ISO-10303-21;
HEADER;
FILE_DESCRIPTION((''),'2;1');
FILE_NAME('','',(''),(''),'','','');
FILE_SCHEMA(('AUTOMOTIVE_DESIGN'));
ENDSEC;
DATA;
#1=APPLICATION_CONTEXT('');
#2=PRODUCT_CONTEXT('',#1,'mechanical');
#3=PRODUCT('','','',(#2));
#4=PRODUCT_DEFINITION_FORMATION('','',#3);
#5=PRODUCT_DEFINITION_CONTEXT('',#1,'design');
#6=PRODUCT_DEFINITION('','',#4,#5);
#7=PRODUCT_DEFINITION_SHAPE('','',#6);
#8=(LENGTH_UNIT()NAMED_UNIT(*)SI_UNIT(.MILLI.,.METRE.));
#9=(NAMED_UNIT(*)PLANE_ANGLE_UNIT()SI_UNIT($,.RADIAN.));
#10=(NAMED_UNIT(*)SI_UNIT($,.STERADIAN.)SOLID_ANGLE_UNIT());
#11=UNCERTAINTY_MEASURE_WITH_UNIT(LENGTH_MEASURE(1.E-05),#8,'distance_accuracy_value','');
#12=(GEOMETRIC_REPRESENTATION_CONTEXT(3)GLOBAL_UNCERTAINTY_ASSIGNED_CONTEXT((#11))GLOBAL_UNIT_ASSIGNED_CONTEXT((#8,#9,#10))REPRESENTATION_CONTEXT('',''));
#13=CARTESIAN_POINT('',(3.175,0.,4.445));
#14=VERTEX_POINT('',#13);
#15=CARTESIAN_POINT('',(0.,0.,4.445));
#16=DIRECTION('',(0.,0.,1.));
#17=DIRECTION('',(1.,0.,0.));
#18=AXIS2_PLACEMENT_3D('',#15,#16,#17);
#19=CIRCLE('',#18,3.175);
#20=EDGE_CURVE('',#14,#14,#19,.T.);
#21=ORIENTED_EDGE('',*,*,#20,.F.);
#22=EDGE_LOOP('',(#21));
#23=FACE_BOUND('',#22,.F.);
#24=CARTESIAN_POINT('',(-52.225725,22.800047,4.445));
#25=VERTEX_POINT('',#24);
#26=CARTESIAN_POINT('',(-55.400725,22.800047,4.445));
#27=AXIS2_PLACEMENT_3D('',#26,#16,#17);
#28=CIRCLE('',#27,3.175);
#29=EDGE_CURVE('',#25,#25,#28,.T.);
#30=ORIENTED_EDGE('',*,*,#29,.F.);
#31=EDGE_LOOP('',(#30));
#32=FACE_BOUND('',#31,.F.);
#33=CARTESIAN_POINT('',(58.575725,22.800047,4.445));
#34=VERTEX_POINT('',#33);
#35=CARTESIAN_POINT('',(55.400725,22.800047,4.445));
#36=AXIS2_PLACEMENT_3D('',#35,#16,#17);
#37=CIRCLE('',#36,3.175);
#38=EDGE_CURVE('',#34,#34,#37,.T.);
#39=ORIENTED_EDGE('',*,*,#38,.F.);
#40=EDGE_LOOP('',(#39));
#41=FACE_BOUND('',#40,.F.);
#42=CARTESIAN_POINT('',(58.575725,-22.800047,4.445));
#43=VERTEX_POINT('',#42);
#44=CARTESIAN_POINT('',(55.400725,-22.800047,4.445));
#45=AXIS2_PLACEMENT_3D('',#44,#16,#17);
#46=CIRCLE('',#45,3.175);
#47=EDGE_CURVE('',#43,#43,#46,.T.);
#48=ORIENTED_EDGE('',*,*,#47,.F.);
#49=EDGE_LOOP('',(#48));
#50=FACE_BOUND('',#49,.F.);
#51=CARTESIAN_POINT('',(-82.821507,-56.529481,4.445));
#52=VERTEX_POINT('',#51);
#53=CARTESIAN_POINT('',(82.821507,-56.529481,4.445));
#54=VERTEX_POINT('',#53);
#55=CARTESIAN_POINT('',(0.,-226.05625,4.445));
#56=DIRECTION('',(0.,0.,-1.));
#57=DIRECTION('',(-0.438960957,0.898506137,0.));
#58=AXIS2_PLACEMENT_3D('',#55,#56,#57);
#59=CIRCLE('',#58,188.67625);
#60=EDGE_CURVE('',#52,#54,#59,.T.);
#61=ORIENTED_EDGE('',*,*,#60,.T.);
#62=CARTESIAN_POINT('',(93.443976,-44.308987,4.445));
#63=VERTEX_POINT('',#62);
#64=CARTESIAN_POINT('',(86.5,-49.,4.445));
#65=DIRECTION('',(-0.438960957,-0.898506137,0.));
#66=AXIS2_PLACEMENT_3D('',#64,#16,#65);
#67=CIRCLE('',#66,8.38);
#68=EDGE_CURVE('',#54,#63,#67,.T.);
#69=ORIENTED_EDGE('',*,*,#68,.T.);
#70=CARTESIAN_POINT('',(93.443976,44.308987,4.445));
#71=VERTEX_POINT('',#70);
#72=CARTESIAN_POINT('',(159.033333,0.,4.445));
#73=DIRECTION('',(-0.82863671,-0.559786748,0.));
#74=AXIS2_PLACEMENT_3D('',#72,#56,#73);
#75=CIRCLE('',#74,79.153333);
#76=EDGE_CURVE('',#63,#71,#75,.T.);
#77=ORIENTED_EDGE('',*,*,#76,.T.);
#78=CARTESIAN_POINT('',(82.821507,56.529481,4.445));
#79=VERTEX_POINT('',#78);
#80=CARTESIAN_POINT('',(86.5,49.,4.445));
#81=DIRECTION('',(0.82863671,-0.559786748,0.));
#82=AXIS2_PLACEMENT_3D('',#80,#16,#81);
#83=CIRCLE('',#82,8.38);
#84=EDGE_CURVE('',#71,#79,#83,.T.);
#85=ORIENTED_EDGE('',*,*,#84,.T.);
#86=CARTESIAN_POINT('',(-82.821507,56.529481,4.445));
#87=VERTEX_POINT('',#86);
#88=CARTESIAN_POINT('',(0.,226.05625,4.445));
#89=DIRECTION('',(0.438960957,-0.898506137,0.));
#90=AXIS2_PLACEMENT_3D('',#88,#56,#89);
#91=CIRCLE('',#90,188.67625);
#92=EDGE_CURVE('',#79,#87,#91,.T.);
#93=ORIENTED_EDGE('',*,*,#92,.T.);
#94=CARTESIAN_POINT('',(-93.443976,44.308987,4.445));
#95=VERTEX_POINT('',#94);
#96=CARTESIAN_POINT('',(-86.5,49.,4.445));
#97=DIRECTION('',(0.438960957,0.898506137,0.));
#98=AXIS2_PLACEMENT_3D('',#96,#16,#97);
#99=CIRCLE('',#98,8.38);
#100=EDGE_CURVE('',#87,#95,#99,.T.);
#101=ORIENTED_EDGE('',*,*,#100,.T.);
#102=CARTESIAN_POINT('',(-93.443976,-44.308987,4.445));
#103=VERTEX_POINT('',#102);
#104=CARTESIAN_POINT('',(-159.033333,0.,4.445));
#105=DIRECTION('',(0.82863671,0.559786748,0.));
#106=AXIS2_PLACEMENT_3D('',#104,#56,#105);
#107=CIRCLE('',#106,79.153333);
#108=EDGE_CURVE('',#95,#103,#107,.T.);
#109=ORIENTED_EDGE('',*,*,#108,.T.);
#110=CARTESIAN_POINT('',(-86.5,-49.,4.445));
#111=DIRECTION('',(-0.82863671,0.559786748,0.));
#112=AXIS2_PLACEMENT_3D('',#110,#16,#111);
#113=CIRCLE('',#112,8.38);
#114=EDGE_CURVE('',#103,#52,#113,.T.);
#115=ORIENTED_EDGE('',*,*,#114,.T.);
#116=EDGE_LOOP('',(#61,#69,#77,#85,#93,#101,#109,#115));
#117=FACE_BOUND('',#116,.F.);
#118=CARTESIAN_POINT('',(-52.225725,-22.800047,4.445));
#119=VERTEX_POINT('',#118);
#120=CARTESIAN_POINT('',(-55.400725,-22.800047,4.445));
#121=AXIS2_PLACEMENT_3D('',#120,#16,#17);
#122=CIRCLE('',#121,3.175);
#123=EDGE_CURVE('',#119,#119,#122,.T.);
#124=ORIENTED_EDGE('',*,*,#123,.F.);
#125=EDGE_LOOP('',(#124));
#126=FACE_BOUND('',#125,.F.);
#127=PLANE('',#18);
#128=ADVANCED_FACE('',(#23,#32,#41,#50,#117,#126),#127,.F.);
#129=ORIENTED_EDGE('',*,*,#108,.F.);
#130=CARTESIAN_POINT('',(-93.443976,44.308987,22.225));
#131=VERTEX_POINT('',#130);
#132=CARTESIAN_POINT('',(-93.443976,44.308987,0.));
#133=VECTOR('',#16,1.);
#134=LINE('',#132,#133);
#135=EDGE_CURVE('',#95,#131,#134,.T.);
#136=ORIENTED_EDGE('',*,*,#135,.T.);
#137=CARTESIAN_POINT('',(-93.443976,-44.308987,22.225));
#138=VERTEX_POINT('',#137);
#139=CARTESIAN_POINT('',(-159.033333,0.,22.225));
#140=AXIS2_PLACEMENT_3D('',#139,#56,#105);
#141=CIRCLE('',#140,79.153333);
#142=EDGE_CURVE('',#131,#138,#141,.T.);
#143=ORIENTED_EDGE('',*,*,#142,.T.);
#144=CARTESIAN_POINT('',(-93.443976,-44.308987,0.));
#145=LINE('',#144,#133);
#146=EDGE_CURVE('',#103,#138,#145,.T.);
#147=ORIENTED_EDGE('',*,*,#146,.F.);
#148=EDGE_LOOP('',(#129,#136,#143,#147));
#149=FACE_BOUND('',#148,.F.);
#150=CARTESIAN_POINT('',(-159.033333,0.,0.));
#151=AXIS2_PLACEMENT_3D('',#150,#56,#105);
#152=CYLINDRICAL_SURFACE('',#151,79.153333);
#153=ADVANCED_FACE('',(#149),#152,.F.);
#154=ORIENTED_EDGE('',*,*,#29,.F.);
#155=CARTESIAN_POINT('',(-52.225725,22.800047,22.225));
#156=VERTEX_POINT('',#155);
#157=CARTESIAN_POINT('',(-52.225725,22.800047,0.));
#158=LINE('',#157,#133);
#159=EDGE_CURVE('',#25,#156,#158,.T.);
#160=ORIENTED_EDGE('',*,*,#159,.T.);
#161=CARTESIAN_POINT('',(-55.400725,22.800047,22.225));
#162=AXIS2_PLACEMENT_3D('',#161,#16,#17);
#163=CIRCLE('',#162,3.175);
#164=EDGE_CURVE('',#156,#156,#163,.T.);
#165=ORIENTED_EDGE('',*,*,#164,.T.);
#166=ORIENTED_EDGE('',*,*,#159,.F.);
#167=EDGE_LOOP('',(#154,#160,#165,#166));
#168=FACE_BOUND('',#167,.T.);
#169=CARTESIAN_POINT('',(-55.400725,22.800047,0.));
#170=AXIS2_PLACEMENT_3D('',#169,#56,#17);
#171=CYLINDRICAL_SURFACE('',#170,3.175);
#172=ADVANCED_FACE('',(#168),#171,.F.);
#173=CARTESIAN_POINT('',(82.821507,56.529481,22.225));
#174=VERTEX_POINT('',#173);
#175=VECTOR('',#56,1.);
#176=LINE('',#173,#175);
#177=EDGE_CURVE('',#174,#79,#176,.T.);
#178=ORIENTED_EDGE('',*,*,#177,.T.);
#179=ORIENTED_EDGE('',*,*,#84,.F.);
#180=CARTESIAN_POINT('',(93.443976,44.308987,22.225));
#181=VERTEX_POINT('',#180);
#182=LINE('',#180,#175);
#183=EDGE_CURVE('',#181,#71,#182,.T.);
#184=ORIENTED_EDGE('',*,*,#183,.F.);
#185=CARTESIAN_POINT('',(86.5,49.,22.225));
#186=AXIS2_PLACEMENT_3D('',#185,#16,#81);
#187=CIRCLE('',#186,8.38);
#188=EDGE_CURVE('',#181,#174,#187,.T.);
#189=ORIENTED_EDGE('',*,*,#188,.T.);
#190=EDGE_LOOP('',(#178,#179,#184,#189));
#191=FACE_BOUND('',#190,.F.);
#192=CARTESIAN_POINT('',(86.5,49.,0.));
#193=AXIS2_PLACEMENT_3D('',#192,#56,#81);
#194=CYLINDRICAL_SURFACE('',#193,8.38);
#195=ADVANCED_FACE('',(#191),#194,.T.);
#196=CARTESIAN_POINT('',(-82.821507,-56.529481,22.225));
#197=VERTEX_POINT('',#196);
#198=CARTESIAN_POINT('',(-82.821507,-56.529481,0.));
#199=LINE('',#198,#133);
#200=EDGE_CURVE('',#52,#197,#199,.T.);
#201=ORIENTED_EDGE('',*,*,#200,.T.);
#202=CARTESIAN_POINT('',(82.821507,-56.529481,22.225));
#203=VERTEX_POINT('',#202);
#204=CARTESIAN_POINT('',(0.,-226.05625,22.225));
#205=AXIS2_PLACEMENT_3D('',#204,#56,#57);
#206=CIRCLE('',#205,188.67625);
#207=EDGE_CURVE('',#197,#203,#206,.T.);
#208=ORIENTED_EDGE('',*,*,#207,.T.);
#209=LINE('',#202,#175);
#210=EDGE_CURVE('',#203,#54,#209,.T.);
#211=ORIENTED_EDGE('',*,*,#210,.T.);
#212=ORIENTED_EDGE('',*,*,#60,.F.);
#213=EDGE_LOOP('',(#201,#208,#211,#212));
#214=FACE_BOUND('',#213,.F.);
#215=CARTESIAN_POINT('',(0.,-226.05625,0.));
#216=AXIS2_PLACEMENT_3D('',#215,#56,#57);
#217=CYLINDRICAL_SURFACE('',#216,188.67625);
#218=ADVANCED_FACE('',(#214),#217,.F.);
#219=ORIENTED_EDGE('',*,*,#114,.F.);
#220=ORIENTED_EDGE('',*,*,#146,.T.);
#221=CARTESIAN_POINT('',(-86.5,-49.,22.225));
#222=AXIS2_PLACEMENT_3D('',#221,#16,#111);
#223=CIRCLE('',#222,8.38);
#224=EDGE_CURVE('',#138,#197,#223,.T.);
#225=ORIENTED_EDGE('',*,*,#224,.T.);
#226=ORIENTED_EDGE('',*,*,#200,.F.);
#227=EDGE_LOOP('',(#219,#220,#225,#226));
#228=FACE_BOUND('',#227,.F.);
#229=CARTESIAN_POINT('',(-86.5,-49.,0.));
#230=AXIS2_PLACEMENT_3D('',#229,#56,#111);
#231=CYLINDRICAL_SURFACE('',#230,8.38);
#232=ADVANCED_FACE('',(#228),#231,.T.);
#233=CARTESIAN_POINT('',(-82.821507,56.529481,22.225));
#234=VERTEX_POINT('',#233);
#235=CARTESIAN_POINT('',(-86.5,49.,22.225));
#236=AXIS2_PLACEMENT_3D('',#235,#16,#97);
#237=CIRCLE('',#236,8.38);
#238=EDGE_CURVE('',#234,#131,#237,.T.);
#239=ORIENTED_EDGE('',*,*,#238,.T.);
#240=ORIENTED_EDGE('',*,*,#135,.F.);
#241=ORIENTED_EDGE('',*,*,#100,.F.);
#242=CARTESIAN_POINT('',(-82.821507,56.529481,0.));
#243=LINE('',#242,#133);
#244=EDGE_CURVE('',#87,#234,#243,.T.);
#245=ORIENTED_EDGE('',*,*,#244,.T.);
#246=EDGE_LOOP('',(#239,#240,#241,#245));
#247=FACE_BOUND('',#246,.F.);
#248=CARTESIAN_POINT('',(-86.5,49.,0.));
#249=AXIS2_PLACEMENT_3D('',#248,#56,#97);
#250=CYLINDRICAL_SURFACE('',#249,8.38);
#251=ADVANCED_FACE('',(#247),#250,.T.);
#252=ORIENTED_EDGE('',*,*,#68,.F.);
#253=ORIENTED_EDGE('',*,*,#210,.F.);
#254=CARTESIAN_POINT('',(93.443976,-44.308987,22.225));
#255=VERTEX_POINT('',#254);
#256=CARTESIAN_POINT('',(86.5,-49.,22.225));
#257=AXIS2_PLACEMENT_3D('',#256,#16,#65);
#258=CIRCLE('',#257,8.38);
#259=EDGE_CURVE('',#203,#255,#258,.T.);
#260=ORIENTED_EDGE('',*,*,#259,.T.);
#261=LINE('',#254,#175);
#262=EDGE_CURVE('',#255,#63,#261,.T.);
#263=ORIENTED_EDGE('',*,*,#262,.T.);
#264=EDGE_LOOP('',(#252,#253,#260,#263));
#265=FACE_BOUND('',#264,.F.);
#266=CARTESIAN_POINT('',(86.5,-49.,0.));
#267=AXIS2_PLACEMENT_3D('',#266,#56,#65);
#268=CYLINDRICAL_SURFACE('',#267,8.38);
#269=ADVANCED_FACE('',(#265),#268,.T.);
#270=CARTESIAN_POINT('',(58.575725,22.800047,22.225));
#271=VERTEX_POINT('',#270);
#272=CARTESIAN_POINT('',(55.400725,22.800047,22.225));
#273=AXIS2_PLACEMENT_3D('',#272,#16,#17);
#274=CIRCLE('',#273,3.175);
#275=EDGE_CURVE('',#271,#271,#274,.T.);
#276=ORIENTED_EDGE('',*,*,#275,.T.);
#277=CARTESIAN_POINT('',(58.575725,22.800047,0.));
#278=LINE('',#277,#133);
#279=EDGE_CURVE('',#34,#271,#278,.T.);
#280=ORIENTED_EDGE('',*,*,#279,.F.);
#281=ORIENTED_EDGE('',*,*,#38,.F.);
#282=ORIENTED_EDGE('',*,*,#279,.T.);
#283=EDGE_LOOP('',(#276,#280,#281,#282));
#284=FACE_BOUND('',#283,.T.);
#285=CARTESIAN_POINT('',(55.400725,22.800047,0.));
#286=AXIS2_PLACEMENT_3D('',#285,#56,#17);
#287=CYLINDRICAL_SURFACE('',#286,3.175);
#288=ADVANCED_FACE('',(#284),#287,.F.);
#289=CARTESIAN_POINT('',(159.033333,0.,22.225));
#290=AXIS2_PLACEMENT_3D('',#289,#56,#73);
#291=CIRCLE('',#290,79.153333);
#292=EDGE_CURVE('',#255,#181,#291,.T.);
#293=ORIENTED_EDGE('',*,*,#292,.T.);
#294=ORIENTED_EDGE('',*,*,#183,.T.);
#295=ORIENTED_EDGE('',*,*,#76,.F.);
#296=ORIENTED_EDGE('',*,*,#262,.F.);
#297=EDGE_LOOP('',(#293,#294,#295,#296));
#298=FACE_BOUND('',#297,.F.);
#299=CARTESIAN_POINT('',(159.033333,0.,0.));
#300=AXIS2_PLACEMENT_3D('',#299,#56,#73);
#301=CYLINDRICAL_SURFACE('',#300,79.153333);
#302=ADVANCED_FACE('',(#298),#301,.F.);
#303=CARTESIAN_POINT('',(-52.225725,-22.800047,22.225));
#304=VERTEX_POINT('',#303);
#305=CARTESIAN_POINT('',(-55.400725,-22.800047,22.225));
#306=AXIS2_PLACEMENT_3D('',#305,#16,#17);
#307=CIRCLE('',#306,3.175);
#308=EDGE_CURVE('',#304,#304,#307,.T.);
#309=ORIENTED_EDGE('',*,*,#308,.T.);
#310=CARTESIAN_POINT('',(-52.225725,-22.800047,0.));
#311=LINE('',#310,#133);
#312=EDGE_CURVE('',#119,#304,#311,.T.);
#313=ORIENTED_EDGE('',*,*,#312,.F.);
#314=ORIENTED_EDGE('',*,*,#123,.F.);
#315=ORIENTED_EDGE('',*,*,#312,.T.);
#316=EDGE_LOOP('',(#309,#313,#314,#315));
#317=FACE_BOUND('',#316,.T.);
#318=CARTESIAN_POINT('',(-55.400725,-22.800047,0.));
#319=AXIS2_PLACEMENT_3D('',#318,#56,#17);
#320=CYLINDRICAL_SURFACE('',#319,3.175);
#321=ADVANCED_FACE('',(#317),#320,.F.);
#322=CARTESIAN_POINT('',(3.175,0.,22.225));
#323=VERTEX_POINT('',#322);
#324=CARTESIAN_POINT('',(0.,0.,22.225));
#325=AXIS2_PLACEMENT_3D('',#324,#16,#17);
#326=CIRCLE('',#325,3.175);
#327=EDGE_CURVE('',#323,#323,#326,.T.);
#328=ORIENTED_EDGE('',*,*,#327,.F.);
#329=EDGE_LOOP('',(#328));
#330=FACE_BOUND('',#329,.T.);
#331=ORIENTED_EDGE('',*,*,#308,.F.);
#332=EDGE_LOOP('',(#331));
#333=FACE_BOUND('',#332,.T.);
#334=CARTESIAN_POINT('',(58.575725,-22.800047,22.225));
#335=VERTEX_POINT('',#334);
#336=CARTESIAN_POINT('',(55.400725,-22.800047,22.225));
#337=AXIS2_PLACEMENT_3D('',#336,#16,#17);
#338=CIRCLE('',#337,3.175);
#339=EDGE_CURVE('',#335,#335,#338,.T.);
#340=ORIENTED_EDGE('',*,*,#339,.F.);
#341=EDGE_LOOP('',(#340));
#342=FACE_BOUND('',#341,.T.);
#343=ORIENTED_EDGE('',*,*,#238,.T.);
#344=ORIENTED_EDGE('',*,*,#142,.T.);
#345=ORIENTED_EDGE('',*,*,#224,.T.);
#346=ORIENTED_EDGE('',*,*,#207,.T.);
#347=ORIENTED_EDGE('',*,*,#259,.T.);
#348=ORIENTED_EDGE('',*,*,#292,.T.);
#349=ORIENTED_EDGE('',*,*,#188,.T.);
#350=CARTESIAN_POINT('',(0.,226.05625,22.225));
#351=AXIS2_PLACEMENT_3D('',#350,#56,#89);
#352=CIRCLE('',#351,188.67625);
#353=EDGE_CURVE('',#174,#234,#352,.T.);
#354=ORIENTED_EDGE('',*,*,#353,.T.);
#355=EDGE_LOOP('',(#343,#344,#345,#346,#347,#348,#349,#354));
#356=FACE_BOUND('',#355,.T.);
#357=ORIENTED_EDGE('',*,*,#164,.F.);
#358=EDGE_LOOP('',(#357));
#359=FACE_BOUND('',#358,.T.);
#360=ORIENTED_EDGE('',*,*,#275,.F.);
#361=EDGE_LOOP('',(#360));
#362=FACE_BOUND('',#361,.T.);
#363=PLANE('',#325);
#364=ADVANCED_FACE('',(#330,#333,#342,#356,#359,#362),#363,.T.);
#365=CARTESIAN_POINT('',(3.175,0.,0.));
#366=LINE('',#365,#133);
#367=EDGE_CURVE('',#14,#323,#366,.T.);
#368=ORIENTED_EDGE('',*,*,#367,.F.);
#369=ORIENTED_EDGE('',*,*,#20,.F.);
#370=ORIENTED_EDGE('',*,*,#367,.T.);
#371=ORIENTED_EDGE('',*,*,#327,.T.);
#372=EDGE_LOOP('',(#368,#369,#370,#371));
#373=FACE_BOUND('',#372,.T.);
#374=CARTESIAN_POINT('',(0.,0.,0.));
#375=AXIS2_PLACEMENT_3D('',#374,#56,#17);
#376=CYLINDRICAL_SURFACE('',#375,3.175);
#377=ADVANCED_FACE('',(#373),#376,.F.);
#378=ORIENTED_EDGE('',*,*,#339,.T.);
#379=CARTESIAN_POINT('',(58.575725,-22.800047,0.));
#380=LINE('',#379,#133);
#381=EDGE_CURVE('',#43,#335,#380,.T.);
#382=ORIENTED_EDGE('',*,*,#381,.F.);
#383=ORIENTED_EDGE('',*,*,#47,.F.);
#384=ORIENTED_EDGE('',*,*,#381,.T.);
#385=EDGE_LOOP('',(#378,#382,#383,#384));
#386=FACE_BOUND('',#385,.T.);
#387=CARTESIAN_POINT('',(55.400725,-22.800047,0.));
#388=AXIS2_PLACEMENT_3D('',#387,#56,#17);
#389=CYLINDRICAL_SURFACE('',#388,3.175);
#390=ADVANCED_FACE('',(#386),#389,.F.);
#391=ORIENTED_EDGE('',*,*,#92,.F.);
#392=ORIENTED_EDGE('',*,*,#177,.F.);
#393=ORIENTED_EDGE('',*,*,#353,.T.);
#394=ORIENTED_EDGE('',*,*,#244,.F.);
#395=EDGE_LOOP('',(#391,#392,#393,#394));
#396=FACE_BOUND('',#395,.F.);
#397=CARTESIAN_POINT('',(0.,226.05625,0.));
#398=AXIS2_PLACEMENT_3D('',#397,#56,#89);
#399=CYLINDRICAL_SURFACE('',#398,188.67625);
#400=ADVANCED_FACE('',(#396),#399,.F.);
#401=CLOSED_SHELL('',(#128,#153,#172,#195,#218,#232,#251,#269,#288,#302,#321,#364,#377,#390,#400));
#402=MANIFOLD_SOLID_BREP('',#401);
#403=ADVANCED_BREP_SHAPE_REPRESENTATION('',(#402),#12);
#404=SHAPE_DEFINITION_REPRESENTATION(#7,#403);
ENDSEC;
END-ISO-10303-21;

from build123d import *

# Parameters (mm, degrees)
F0_R     = 3.175
F1_DEPTH = 19.05
F2_DEPTH = 22.225
F3_DEPTH = 4.445


# Not quite as in the source:
# - a feature names something its author has since deleted; it is built from what else it names


with BuildPart() as f1:
    # F0 (on Top) → F1 (new body)
    with BuildSketch(Plane.XY):
        with BuildLine():
            ThreePointArc((82.8215071839, 56.5294814298), (0, 37.38), (-82.8215071839, 56.5294814298))
            ThreePointArc((-82.8215071839, 56.5294814298), (-92.8246316261, 54.4975844509), (-93.4439756283, 44.3089870526))
            ThreePointArc((-93.4439756283, 44.3089870526), (-79.88, 0), (-93.4439756283, -44.3089870526))
            ThreePointArc((-93.4439756283, -44.3089870526), (-92.8246316261, -54.4975844509), (-82.8215071839, -56.5294814298))
            ThreePointArc((-82.8215071839, -56.5294814298), (0, -37.38), (82.8215071839, -56.5294814298))
            ThreePointArc((82.8215071839, -56.5294814298), (92.8246316261, -54.4975844509), (93.4439756283, -44.3089870526))
            ThreePointArc((93.4439756283, -44.3089870526), (79.88, 0), (93.4439756283, 44.3089870526))
            ThreePointArc((93.4439756283, 44.3089870526), (92.8246316261, 54.4975844509), (82.8215071839, 56.5294814298))
        make_face()
        with Locations((-55.4007254541, -22.8000469506)):
            Circle(F0_R, mode=Mode.SUBTRACT)
        Circle(F0_R, mode=Mode.SUBTRACT)
        with Locations((55.4007254541, -22.8000469506)):
            Circle(F0_R, mode=Mode.SUBTRACT)
        with Locations((-55.4007254541, 22.8000469506)):
            Circle(F0_R, mode=Mode.SUBTRACT)
        with Locations((55.4007254541, 22.8000469506)):
            Circle(F0_R, mode=Mode.SUBTRACT)
    extrude(amount=F1_DEPTH)

    # F0 (on Top) → F2 (join)
    with BuildSketch(Plane.XY):
        with BuildLine():
            ThreePointArc((82.8215071839, 56.5294814298), (0, 37.38), (-82.8215071839, 56.5294814298))
            ThreePointArc((-82.8215071839, 56.5294814298), (-92.8246316261, 54.4975844509), (-93.4439756283, 44.3089870526))
            ThreePointArc((-93.4439756283, 44.3089870526), (-79.88, 0), (-93.4439756283, -44.3089870526))
            ThreePointArc((-93.4439756283, -44.3089870526), (-92.8246316261, -54.4975844509), (-82.8215071839, -56.5294814298))
            ThreePointArc((-82.8215071839, -56.5294814298), (0, -37.38), (82.8215071839, -56.5294814298))
            ThreePointArc((82.8215071839, -56.5294814298), (92.8246316261, -54.4975844509), (93.4439756283, -44.3089870526))
            ThreePointArc((93.4439756283, -44.3089870526), (79.88, 0), (93.4439756283, 44.3089870526))
            ThreePointArc((93.4439756283, 44.3089870526), (92.8246316261, 54.4975844509), (82.8215071839, 56.5294814298))
        make_face()
        with Locations((-55.4007254541, -22.8000469506)):
            Circle(F0_R, mode=Mode.SUBTRACT)
        Circle(F0_R, mode=Mode.SUBTRACT)
        with Locations((55.4007254541, -22.8000469506)):
            Circle(F0_R, mode=Mode.SUBTRACT)
        with Locations((-55.4007254541, 22.8000469506)):
            Circle(F0_R, mode=Mode.SUBTRACT)
        with Locations((55.4007254541, 22.8000469506)):
            Circle(F0_R, mode=Mode.SUBTRACT)
    extrude(amount=F2_DEPTH)

    # F0 (on Top) → F3 (cut)
    with BuildSketch(Plane.XY):
        with BuildLine():
            ThreePointArc((82.8215071839, 56.5294814298), (0, 37.38), (-82.8215071839, 56.5294814298))
            ThreePointArc((-82.8215071839, 56.5294814298), (-92.8246316261, 54.4975844509), (-93.4439756283, 44.3089870526))
            ThreePointArc((-93.4439756283, 44.3089870526), (-79.88, 0), (-93.4439756283, -44.3089870526))
            ThreePointArc((-93.4439756283, -44.3089870526), (-92.8246316261, -54.4975844509), (-82.8215071839, -56.5294814298))
            ThreePointArc((-82.8215071839, -56.5294814298), (0, -37.38), (82.8215071839, -56.5294814298))
            ThreePointArc((82.8215071839, -56.5294814298), (92.8246316261, -54.4975844509), (93.4439756283, -44.3089870526))
            ThreePointArc((93.4439756283, -44.3089870526), (79.88, 0), (93.4439756283, 44.3089870526))
            ThreePointArc((93.4439756283, 44.3089870526), (92.8246316261, 54.4975844509), (82.8215071839, 56.5294814298))
        make_face()
        with Locations((-55.4007254541, -22.8000469506)):
            Circle(F0_R, mode=Mode.SUBTRACT)
        Circle(F0_R, mode=Mode.SUBTRACT)
        with Locations((55.4007254541, -22.8000469506)):
            Circle(F0_R, mode=Mode.SUBTRACT)
        with Locations((-55.4007254541, 22.8000469506)):
            Circle(F0_R, mode=Mode.SUBTRACT)
        with Locations((55.4007254541, 22.8000469506)):
            Circle(F0_R, mode=Mode.SUBTRACT)
    extrude(amount=F3_DEPTH, mode=Mode.SUBTRACT)


solid = f1.part
